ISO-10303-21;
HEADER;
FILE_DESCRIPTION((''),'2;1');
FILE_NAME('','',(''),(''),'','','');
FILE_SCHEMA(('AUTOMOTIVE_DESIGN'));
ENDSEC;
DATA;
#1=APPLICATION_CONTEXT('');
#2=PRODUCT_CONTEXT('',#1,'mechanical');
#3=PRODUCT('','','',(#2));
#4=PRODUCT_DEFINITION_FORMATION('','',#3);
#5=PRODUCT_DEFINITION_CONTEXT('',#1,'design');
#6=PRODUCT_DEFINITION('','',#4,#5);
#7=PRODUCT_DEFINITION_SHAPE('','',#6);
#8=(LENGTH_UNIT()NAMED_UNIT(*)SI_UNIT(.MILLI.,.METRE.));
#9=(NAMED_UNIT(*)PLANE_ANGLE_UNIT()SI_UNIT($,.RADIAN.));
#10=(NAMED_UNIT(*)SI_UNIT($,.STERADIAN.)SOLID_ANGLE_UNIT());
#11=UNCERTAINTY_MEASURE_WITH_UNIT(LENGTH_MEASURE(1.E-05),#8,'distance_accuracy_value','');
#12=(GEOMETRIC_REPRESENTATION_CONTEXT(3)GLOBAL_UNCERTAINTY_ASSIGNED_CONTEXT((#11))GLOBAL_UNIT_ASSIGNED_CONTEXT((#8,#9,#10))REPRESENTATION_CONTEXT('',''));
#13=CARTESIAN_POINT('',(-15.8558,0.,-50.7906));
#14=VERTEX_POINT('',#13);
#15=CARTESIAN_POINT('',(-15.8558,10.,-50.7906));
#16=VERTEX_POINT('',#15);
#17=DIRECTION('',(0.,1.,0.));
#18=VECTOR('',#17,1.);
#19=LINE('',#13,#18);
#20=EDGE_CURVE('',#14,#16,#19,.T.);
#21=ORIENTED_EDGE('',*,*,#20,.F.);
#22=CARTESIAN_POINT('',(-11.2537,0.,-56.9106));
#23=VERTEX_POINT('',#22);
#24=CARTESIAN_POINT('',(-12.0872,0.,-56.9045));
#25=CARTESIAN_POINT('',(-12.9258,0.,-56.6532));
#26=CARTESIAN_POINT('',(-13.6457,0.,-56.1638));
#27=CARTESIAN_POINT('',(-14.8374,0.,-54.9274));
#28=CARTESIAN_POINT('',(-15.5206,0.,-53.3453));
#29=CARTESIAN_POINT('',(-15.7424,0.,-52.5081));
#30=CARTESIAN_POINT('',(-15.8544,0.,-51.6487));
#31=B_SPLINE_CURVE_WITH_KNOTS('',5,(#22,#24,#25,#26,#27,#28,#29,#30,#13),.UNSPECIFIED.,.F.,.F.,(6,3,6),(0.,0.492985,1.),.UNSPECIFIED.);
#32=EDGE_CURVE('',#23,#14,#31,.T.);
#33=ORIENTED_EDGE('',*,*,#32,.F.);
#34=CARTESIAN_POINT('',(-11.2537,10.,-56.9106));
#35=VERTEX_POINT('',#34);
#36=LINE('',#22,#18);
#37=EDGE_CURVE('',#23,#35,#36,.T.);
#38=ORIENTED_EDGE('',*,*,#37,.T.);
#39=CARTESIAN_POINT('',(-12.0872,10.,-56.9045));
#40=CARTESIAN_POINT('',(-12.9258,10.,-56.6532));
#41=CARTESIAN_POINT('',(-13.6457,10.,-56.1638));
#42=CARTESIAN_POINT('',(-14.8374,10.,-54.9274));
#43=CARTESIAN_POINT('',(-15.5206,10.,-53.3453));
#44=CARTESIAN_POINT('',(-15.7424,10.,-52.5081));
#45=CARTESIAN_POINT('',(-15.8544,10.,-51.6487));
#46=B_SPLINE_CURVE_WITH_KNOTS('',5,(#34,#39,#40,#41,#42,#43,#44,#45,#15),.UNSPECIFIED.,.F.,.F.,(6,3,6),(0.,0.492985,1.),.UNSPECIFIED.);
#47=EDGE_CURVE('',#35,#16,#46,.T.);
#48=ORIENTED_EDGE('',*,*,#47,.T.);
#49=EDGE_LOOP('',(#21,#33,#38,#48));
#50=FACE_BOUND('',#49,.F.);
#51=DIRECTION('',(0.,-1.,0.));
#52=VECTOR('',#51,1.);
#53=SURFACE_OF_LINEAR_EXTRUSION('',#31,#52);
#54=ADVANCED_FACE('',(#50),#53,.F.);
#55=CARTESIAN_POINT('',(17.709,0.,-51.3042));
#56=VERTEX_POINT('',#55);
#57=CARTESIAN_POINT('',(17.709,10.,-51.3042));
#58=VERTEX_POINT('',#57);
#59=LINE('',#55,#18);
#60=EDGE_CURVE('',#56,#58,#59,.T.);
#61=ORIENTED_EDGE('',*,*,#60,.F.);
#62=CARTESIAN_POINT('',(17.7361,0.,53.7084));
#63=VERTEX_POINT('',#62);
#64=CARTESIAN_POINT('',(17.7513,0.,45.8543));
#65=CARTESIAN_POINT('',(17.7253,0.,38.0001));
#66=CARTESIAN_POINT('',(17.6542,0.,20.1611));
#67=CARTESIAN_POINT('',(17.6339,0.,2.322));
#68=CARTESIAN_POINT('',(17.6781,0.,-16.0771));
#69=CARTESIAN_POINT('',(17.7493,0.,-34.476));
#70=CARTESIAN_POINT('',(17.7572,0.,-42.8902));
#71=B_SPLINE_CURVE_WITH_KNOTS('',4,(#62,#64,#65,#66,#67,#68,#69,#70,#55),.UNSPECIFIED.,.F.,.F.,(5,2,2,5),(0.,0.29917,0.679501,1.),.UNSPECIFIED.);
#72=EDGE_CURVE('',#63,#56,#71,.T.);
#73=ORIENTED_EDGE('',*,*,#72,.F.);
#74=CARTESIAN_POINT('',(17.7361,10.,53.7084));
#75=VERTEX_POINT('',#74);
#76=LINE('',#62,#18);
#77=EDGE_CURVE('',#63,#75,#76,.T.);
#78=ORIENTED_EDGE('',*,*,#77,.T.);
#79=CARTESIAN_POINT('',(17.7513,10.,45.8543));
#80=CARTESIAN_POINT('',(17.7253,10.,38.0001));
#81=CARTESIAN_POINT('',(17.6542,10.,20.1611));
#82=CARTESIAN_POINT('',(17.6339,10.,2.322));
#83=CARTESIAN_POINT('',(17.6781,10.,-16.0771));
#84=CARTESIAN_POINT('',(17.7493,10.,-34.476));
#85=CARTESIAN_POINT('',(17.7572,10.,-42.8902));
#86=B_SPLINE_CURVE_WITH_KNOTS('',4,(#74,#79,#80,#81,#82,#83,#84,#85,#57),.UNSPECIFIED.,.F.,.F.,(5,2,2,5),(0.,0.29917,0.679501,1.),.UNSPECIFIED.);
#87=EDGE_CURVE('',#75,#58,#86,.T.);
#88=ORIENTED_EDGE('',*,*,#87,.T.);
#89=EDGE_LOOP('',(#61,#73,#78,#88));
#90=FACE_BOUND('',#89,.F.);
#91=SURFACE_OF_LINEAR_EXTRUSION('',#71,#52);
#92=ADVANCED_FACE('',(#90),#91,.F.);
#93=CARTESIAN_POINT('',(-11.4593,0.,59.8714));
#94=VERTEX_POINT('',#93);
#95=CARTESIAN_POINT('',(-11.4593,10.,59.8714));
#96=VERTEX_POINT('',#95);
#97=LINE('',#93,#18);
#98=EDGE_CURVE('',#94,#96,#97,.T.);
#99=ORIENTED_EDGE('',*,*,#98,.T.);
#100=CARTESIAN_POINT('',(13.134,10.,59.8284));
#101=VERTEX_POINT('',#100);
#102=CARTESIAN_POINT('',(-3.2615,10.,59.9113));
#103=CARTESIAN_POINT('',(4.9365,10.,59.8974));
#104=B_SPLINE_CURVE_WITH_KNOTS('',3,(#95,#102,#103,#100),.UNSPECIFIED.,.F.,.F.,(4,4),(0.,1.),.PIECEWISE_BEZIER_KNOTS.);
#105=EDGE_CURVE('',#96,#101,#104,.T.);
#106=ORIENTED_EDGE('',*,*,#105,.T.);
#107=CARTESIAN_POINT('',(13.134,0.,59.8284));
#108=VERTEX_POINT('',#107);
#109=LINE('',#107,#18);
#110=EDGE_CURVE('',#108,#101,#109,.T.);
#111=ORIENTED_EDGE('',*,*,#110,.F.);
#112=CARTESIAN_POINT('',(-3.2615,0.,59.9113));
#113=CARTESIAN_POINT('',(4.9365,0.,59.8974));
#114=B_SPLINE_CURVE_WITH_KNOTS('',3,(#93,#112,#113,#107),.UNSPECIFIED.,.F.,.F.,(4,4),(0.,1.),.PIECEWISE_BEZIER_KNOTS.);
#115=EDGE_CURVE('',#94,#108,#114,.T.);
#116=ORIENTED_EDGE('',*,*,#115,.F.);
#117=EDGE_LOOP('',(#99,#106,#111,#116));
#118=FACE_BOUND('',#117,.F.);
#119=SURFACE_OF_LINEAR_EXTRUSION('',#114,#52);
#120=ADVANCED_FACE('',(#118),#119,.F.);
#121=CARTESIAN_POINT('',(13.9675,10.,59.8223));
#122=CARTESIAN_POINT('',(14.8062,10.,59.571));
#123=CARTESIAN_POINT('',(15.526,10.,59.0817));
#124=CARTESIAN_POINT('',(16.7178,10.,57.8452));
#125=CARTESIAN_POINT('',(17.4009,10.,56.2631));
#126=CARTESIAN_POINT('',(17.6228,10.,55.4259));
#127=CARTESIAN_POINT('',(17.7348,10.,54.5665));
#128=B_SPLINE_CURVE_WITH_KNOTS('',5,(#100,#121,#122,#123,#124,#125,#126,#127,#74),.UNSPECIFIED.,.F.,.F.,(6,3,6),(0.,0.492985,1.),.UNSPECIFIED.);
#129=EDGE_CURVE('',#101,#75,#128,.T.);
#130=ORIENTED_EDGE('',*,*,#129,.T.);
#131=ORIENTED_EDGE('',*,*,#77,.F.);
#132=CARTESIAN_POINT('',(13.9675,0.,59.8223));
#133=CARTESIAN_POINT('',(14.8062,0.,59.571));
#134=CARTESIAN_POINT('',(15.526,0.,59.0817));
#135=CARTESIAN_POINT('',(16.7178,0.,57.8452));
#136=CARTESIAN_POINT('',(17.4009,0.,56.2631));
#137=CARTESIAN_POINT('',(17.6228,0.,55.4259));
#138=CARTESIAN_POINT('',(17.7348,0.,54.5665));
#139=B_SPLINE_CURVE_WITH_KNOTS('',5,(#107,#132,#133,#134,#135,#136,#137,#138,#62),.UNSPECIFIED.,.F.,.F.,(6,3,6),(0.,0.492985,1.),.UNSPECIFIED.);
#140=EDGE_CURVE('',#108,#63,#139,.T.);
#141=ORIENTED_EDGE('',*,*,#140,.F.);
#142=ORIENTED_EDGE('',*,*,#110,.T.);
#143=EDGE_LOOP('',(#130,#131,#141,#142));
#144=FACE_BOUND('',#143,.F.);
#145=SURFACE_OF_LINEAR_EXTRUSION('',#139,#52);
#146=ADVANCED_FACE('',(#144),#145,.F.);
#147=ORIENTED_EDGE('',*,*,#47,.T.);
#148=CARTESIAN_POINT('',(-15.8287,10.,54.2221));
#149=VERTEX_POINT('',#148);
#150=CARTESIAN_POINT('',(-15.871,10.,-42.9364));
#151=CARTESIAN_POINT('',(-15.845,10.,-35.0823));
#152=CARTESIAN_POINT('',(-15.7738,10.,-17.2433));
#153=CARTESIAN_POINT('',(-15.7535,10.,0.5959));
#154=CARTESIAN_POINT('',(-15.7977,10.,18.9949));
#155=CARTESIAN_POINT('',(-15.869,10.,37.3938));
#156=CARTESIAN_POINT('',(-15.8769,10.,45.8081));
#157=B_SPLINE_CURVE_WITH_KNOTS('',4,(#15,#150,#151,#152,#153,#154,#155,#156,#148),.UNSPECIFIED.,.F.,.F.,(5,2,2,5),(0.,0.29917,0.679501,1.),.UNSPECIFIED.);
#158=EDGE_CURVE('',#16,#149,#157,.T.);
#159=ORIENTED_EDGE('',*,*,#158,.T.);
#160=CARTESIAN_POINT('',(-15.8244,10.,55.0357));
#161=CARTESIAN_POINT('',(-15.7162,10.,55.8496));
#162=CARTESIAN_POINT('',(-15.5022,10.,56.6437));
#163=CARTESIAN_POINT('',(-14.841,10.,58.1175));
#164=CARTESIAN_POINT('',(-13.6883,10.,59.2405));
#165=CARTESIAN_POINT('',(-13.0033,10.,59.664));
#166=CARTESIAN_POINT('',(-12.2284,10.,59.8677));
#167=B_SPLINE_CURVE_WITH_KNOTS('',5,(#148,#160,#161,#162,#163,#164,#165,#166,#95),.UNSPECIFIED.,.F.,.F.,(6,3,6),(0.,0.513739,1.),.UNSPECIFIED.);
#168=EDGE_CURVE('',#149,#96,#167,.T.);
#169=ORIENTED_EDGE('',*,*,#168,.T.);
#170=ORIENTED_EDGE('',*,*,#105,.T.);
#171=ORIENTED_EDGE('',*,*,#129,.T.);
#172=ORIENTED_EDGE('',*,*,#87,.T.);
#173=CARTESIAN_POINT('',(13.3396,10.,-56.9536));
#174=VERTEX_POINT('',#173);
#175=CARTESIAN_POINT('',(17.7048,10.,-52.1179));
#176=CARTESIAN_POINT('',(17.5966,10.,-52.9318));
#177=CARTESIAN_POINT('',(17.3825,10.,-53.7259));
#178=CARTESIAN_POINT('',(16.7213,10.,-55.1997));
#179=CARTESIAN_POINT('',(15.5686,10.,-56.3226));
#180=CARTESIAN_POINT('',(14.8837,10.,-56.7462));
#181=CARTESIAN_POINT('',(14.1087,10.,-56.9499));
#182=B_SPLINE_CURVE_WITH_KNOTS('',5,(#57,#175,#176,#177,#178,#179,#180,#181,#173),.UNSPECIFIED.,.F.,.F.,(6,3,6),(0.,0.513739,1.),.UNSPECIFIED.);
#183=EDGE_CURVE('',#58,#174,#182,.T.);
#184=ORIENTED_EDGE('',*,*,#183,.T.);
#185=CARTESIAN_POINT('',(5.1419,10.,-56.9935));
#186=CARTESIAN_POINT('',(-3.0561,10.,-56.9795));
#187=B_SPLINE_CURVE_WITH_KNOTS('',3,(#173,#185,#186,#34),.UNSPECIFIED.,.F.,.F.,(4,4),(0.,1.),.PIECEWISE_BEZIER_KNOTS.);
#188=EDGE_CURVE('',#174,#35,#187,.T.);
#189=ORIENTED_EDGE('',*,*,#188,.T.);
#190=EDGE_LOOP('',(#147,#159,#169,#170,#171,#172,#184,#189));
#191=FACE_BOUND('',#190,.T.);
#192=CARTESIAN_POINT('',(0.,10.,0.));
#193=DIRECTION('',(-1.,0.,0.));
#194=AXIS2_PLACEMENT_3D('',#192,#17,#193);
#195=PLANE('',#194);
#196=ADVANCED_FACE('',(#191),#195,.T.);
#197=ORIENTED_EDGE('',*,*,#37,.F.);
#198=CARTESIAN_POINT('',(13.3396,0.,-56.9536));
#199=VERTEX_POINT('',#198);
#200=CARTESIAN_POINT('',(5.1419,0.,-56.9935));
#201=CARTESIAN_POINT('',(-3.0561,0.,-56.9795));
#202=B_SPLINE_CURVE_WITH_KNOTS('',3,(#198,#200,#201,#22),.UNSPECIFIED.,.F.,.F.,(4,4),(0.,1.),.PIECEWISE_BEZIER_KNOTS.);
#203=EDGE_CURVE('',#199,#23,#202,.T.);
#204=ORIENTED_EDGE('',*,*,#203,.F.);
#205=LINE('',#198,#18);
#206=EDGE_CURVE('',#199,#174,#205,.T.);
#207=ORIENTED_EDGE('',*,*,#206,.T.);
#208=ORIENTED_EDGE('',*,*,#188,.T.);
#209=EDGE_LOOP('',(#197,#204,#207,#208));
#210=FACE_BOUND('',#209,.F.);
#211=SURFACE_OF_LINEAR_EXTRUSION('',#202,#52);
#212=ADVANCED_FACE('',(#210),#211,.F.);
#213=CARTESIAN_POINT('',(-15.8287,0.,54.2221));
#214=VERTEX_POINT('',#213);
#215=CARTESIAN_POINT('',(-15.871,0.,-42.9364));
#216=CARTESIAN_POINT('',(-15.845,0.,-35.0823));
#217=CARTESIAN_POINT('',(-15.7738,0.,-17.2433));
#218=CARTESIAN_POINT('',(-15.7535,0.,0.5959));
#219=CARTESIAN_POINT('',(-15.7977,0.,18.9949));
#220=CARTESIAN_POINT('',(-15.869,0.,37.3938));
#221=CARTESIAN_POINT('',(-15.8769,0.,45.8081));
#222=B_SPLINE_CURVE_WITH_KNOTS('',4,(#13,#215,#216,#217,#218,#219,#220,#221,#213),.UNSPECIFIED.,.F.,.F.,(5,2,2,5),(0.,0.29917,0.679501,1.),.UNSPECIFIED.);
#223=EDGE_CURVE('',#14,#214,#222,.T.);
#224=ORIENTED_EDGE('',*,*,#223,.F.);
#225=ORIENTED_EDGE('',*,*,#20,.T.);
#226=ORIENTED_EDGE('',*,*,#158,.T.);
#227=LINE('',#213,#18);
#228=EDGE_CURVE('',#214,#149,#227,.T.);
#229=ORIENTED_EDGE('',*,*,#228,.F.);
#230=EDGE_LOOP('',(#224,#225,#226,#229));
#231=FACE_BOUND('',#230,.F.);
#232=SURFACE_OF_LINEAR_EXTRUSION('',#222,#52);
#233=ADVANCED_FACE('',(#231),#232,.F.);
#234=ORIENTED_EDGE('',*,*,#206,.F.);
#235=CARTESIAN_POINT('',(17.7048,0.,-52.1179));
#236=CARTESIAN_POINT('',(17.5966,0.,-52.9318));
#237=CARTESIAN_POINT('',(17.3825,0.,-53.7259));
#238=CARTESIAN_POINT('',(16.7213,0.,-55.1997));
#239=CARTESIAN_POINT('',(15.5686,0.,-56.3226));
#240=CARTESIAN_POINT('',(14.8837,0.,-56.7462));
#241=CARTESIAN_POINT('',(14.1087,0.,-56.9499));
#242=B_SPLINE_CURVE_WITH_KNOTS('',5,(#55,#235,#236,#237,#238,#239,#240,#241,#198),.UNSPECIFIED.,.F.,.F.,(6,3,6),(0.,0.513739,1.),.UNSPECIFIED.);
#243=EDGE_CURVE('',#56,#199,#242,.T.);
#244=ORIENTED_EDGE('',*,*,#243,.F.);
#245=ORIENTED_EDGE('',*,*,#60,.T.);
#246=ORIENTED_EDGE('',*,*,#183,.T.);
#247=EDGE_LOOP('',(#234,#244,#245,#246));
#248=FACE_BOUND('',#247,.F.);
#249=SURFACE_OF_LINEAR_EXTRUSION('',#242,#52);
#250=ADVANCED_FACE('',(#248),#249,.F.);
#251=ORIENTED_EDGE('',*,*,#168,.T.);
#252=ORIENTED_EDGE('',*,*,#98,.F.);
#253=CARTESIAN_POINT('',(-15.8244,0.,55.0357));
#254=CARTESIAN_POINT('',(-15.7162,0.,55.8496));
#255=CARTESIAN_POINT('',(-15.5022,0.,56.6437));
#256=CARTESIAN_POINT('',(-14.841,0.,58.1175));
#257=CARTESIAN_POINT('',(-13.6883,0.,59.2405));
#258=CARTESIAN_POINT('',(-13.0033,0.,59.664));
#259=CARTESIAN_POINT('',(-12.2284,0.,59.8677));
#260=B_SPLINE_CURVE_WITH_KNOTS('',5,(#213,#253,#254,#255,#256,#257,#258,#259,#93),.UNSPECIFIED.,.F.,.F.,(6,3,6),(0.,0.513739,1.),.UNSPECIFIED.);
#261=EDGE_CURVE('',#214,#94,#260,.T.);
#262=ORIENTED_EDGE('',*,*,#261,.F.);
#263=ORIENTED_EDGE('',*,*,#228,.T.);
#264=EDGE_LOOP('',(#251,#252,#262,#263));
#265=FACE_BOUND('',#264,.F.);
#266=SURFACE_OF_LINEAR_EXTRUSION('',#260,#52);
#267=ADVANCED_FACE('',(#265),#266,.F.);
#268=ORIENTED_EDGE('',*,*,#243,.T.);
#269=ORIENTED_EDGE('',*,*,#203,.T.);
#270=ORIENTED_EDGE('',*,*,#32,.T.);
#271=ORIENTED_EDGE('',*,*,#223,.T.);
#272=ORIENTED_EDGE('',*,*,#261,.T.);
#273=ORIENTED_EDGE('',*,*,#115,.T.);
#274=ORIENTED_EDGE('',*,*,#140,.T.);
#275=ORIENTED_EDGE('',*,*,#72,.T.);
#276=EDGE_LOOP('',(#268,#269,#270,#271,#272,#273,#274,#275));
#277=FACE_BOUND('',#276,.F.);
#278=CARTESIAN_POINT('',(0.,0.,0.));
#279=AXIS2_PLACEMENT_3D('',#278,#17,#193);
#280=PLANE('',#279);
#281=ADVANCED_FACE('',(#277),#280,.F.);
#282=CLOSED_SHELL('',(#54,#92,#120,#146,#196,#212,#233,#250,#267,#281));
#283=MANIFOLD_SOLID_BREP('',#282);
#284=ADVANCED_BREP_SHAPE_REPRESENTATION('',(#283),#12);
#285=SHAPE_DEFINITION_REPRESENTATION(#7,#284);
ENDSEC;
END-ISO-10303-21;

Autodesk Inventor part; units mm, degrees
ref_plane "YZ Plane" through (0, 0, 0) normal (1, 0, 0) x (0, 1, 0)
ref_plane "XZ Plane" through (0, 0, 0) normal (0, 1, 0) x (-1, 0, 0)
ref_plane "XY Plane" through (0, 0, 0) normal (0, 0, 1) x (1, 0, 0)
sketch "Sketch1" plane through (0, 0, 0) normal (0, 1, 0) x (-1, 0, 0)
  spline S0 degree 3 poles (-16.4662, -61.0411) (-16.9768, -61.0411) (-17.4763, -60.9416) (-18.4214, -60.5459) (-18.8475, -60.2567) (-19.6563, -59.4765) (-20.0062, -58.969) (-20.4997, -57.9471) (-20.6653, -57.4443) (-20.8869, -56.4029) (-20.9402, -55.861) (-20.9402, -55.3208) knots 0 0 0 0 0.153185 0.153185 0.307403 0.307403 0.489915 0.489915 0.646626 0.646626 0.807788 0.807788 0.807788 0.807788
  line L0 (14.3601, -61.0411) -> (-16.4662, -61.0411)
  spline S1 degree 3 poles (19.0598, -54.8663) (19.0598, -55.9309) (18.8635, -56.9624) (18.1798, -58.6169) (17.7611, -59.261) (16.8631, -60.1665) (16.4105, -60.4909) (15.6597, -60.8212) (15.4064, -60.9035) (14.8872, -61.0136) (14.6244, -61.0411) (14.3601, -61.0411) knots 0 0 0 0 0.319361 0.319361 0.579654 0.579654 0.780076 0.780076 0.876522 0.876522 0.972216 0.972216 0.972216 0.972216
  line L1 (19.0598, 58.2386) -> (19.0598, -54.8663)
  spline S2 degree 3 poles (14.5859, 63.9589) (15.0965, 63.9589) (15.596, 63.8594) (16.541, 63.4638) (16.9672, 63.1745) (17.7759, 62.3943) (18.1258, 61.8869) (18.6193, 60.8649) (18.785, 60.3621) (19.0065, 59.3207) (19.0598, 58.7789) (19.0598, 58.2386) knots 0 0 0 0 0.153185 0.153185 0.307403 0.307403 0.489915 0.489915 0.646626 0.646626 0.807788 0.807788 0.807788 0.807788
  line L2 (-16.2404, 63.9589) -> (14.5859, 63.9589)
  spline S3 degree 3 poles (-20.9402, 57.7841) (-20.9402, 58.8487) (-20.7438, 59.8802) (-20.0601, 61.5347) (-19.6415, 62.1788) (-18.7435, 63.0843) (-18.2909, 63.4088) (-17.5401, 63.739) (-17.2868, 63.8214) (-16.7675, 63.9314) (-16.5048, 63.9589) (-16.2404, 63.9589) knots 0 0 0 0 0.319361 0.319361 0.579654 0.579654 0.780076 0.780076 0.876522 0.876522 0.972216 0.972216 0.972216 0.972216
  line L3 (-20.9402, -55.3208) -> (-20.9402, 57.7841)
  spline S4 degree 3 poles (-17.909, -51.3054) (-18.0017, -34.7045) (-17.8635, -20.3656) (-17.834, 24.2156) (-17.9641, 38.428) (-17.9361, 53.7088) knots 1.062785 1.062785 1.062785 1.062785 6.428499 6.428499 11.956224 11.956224 11.956224 11.956224
  spline S5 degree 3 poles (-13.1357, 60.0284) (-13.638, 60.0242) (-14.1288, 59.921) (-15.0968, 59.519) (-15.5516, 59.2116) (-16.4426, 58.3701) (-16.8406, 57.8065) (-17.4116, 56.6647) (-17.6077, 56.0952) (-17.8699, 54.9224) (-17.935, 54.3146) (-17.9361, 53.7088) knots 0 0 0 0 0.150687 0.150687 0.314293 0.314293 0.517495 0.517495 0.695221 0.695221 0.875662 0.875662 0.875662 0.875662
  spline S6 degree 3 poles (-13.1357, 60.0284) (-9.1116, 60.0623) (-5.089, 60.0828) (3.0852, 60.098) (7.2738, 60.0919) (11.4603, 60.0714) knots 0.852367 0.852367 0.852367 0.852367 2.058296 2.058296 3.311846 3.311846 3.311846 3.311846
  spline S7 degree 3 poles (16.0287, 54.2232) (16.0231, 55.2304) (15.8339, 56.1998) (15.1963, 57.721) (14.8055, 58.3394) (13.9142, 59.2273) (13.4723, 59.5381) (12.7388, 59.8558) (12.4903, 59.9354) (11.9798, 60.0428) (11.7208, 60.0701) (11.4603, 60.0714) knots 0 0 0 0 0.302161 0.302161 0.537205 0.537205 0.71344 0.71344 0.79894 0.79894 0.88426 0.88426 0.88426 0.88426
  spline S8 degree 3 poles (16.0287, 54.2232) (16.1213, 37.6223) (15.9832, 23.2834) (15.9536, -21.2978) (16.0838, -35.5102) (16.0558, -50.791) knots 1.062785 1.062785 1.062785 1.062785 6.428499 6.428499 11.956224 11.956224 11.956224 11.956224
  spline S9 degree 3 poles (11.2554, -57.1106) (11.7576, -57.1063) (12.2484, -57.0032) (13.2164, -56.6011) (13.6712, -56.2938) (14.5622, -55.4523) (14.9602, -54.8887) (15.5312, -53.7469) (15.7273, -53.1774) (15.9896, -52.0046) (16.0547, -51.3968) (16.0558, -50.791) knots 0 0 0 0 0.150687 0.150687 0.314293 0.314293 0.517495 0.517495 0.695221 0.695221 0.875662 0.875662 0.875662 0.875662
  spline S10 degree 3 poles (11.2554, -57.1106) (7.2313, -57.1445) (3.2086, -57.165) (-4.9655, -57.1802) (-9.1542, -57.174) (-13.3406, -57.1536) knots 0.852367 0.852367 0.852367 0.852367 2.058296 2.058296 3.311846 3.311846 3.311846 3.311846
  spline S11 degree 3 poles (-17.909, -51.3054) (-17.9034, -52.3126) (-17.7143, -53.282) (-17.0766, -54.8032) (-16.6858, -55.4216) (-15.7945, -56.3094) (-15.3527, -56.6202) (-14.6192, -56.938) (-14.3706, -57.0176) (-13.8601, -57.1249) (-13.6012, -57.1523) (-13.3406, -57.1536) knots 0 0 0 0 0.302161 0.302161 0.537205 0.537205 0.71344 0.71344 0.79894 0.79894 0.88426 0.88426 0.88426 0.88426
  spline S12 degree 4 poles (15.8558, -50.7906) (15.871, -42.9364) (15.845, -35.0823) (15.7738, -17.2433) (15.7535, 0.5959) (15.7977, 18.9949) (15.869, 37.3938) (15.8769, 45.8081) (15.8287, 54.2221) knots 0 0 0 0 0 0.29917 0.29917 0.679501 0.679501 1 1 1 1 1
  spline S13 degree 5 poles (15.8287, 54.2221) (15.8244, 55.0357) (15.7162, 55.8496) (15.5022, 56.6437) (14.841, 58.1175) (13.6883, 59.2405) (13.0033, 59.664) (12.2284, 59.8677) (11.4593, 59.8714) knots 0 0 0 0 0 0 0.513739 0.513739 0.513739 1 1 1 1 1 1
  spline S14 degree 3 poles (11.4593, 59.8714) (3.2615, 59.9113) (-4.9365, 59.8974) (-13.134, 59.8284) knots 0 0 0 0 1 1 1 1
  spline S15 degree 5 poles (-13.134, 59.8284) (-13.9675, 59.8223) (-14.8062, 59.571) (-15.526, 59.0817) (-16.7178, 57.8452) (-17.4009, 56.2631) (-17.6228, 55.4259) (-17.7348, 54.5665) (-17.7361, 53.7084) knots 0 0 0 0 0 0 0.492985 0.492985 0.492985 1 1 1 1 1 1
  spline S16 degree 4 poles (-17.7361, 53.7084) (-17.7513, 45.8543) (-17.7253, 38.0001) (-17.6542, 20.1611) (-17.6339, 2.322) (-17.6781, -16.0771) (-17.7493, -34.476) (-17.7572, -42.8902) (-17.709, -51.3042) knots 0 0 0 0 0 0.29917 0.29917 0.679501 0.679501 1 1 1 1 1
  spline S17 degree 5 poles (-17.709, -51.3042) (-17.7048, -52.1179) (-17.5966, -52.9318) (-17.3825, -53.7259) (-16.7213, -55.1997) (-15.5686, -56.3226) (-14.8837, -56.7462) (-14.1087, -56.9499) (-13.3396, -56.9536) knots 0 0 0 0 0 0 0.513739 0.513739 0.513739 1 1 1 1 1 1
  spline S18 degree 3 poles (-13.3396, -56.9536) (-5.1419, -56.9935) (3.0561, -56.9795) (11.2537, -56.9106) knots 0 0 0 0 1 1 1 1
  spline S19 degree 5 poles (11.2537, -56.9106) (12.0872, -56.9045) (12.9258, -56.6532) (13.6457, -56.1638) (14.8374, -54.9274) (15.5206, -53.3453) (15.7424, -52.5081) (15.8544, -51.6487) (15.8558, -50.7906) knots 0 0 0 0 0 0 0.492985 0.492985 0.492985 1 1 1 1 1 1
  point P0 (-0.9402, 1.4589)
  dimension "d7" = 0.2
extrude "Extrusion1" add sketch "Sketch1" along normal blind 10 contours S19 S18 S17 S16 S15 S14 S13 S12
properties part number "3DP_PLA_Air_Funnel_Grid"
